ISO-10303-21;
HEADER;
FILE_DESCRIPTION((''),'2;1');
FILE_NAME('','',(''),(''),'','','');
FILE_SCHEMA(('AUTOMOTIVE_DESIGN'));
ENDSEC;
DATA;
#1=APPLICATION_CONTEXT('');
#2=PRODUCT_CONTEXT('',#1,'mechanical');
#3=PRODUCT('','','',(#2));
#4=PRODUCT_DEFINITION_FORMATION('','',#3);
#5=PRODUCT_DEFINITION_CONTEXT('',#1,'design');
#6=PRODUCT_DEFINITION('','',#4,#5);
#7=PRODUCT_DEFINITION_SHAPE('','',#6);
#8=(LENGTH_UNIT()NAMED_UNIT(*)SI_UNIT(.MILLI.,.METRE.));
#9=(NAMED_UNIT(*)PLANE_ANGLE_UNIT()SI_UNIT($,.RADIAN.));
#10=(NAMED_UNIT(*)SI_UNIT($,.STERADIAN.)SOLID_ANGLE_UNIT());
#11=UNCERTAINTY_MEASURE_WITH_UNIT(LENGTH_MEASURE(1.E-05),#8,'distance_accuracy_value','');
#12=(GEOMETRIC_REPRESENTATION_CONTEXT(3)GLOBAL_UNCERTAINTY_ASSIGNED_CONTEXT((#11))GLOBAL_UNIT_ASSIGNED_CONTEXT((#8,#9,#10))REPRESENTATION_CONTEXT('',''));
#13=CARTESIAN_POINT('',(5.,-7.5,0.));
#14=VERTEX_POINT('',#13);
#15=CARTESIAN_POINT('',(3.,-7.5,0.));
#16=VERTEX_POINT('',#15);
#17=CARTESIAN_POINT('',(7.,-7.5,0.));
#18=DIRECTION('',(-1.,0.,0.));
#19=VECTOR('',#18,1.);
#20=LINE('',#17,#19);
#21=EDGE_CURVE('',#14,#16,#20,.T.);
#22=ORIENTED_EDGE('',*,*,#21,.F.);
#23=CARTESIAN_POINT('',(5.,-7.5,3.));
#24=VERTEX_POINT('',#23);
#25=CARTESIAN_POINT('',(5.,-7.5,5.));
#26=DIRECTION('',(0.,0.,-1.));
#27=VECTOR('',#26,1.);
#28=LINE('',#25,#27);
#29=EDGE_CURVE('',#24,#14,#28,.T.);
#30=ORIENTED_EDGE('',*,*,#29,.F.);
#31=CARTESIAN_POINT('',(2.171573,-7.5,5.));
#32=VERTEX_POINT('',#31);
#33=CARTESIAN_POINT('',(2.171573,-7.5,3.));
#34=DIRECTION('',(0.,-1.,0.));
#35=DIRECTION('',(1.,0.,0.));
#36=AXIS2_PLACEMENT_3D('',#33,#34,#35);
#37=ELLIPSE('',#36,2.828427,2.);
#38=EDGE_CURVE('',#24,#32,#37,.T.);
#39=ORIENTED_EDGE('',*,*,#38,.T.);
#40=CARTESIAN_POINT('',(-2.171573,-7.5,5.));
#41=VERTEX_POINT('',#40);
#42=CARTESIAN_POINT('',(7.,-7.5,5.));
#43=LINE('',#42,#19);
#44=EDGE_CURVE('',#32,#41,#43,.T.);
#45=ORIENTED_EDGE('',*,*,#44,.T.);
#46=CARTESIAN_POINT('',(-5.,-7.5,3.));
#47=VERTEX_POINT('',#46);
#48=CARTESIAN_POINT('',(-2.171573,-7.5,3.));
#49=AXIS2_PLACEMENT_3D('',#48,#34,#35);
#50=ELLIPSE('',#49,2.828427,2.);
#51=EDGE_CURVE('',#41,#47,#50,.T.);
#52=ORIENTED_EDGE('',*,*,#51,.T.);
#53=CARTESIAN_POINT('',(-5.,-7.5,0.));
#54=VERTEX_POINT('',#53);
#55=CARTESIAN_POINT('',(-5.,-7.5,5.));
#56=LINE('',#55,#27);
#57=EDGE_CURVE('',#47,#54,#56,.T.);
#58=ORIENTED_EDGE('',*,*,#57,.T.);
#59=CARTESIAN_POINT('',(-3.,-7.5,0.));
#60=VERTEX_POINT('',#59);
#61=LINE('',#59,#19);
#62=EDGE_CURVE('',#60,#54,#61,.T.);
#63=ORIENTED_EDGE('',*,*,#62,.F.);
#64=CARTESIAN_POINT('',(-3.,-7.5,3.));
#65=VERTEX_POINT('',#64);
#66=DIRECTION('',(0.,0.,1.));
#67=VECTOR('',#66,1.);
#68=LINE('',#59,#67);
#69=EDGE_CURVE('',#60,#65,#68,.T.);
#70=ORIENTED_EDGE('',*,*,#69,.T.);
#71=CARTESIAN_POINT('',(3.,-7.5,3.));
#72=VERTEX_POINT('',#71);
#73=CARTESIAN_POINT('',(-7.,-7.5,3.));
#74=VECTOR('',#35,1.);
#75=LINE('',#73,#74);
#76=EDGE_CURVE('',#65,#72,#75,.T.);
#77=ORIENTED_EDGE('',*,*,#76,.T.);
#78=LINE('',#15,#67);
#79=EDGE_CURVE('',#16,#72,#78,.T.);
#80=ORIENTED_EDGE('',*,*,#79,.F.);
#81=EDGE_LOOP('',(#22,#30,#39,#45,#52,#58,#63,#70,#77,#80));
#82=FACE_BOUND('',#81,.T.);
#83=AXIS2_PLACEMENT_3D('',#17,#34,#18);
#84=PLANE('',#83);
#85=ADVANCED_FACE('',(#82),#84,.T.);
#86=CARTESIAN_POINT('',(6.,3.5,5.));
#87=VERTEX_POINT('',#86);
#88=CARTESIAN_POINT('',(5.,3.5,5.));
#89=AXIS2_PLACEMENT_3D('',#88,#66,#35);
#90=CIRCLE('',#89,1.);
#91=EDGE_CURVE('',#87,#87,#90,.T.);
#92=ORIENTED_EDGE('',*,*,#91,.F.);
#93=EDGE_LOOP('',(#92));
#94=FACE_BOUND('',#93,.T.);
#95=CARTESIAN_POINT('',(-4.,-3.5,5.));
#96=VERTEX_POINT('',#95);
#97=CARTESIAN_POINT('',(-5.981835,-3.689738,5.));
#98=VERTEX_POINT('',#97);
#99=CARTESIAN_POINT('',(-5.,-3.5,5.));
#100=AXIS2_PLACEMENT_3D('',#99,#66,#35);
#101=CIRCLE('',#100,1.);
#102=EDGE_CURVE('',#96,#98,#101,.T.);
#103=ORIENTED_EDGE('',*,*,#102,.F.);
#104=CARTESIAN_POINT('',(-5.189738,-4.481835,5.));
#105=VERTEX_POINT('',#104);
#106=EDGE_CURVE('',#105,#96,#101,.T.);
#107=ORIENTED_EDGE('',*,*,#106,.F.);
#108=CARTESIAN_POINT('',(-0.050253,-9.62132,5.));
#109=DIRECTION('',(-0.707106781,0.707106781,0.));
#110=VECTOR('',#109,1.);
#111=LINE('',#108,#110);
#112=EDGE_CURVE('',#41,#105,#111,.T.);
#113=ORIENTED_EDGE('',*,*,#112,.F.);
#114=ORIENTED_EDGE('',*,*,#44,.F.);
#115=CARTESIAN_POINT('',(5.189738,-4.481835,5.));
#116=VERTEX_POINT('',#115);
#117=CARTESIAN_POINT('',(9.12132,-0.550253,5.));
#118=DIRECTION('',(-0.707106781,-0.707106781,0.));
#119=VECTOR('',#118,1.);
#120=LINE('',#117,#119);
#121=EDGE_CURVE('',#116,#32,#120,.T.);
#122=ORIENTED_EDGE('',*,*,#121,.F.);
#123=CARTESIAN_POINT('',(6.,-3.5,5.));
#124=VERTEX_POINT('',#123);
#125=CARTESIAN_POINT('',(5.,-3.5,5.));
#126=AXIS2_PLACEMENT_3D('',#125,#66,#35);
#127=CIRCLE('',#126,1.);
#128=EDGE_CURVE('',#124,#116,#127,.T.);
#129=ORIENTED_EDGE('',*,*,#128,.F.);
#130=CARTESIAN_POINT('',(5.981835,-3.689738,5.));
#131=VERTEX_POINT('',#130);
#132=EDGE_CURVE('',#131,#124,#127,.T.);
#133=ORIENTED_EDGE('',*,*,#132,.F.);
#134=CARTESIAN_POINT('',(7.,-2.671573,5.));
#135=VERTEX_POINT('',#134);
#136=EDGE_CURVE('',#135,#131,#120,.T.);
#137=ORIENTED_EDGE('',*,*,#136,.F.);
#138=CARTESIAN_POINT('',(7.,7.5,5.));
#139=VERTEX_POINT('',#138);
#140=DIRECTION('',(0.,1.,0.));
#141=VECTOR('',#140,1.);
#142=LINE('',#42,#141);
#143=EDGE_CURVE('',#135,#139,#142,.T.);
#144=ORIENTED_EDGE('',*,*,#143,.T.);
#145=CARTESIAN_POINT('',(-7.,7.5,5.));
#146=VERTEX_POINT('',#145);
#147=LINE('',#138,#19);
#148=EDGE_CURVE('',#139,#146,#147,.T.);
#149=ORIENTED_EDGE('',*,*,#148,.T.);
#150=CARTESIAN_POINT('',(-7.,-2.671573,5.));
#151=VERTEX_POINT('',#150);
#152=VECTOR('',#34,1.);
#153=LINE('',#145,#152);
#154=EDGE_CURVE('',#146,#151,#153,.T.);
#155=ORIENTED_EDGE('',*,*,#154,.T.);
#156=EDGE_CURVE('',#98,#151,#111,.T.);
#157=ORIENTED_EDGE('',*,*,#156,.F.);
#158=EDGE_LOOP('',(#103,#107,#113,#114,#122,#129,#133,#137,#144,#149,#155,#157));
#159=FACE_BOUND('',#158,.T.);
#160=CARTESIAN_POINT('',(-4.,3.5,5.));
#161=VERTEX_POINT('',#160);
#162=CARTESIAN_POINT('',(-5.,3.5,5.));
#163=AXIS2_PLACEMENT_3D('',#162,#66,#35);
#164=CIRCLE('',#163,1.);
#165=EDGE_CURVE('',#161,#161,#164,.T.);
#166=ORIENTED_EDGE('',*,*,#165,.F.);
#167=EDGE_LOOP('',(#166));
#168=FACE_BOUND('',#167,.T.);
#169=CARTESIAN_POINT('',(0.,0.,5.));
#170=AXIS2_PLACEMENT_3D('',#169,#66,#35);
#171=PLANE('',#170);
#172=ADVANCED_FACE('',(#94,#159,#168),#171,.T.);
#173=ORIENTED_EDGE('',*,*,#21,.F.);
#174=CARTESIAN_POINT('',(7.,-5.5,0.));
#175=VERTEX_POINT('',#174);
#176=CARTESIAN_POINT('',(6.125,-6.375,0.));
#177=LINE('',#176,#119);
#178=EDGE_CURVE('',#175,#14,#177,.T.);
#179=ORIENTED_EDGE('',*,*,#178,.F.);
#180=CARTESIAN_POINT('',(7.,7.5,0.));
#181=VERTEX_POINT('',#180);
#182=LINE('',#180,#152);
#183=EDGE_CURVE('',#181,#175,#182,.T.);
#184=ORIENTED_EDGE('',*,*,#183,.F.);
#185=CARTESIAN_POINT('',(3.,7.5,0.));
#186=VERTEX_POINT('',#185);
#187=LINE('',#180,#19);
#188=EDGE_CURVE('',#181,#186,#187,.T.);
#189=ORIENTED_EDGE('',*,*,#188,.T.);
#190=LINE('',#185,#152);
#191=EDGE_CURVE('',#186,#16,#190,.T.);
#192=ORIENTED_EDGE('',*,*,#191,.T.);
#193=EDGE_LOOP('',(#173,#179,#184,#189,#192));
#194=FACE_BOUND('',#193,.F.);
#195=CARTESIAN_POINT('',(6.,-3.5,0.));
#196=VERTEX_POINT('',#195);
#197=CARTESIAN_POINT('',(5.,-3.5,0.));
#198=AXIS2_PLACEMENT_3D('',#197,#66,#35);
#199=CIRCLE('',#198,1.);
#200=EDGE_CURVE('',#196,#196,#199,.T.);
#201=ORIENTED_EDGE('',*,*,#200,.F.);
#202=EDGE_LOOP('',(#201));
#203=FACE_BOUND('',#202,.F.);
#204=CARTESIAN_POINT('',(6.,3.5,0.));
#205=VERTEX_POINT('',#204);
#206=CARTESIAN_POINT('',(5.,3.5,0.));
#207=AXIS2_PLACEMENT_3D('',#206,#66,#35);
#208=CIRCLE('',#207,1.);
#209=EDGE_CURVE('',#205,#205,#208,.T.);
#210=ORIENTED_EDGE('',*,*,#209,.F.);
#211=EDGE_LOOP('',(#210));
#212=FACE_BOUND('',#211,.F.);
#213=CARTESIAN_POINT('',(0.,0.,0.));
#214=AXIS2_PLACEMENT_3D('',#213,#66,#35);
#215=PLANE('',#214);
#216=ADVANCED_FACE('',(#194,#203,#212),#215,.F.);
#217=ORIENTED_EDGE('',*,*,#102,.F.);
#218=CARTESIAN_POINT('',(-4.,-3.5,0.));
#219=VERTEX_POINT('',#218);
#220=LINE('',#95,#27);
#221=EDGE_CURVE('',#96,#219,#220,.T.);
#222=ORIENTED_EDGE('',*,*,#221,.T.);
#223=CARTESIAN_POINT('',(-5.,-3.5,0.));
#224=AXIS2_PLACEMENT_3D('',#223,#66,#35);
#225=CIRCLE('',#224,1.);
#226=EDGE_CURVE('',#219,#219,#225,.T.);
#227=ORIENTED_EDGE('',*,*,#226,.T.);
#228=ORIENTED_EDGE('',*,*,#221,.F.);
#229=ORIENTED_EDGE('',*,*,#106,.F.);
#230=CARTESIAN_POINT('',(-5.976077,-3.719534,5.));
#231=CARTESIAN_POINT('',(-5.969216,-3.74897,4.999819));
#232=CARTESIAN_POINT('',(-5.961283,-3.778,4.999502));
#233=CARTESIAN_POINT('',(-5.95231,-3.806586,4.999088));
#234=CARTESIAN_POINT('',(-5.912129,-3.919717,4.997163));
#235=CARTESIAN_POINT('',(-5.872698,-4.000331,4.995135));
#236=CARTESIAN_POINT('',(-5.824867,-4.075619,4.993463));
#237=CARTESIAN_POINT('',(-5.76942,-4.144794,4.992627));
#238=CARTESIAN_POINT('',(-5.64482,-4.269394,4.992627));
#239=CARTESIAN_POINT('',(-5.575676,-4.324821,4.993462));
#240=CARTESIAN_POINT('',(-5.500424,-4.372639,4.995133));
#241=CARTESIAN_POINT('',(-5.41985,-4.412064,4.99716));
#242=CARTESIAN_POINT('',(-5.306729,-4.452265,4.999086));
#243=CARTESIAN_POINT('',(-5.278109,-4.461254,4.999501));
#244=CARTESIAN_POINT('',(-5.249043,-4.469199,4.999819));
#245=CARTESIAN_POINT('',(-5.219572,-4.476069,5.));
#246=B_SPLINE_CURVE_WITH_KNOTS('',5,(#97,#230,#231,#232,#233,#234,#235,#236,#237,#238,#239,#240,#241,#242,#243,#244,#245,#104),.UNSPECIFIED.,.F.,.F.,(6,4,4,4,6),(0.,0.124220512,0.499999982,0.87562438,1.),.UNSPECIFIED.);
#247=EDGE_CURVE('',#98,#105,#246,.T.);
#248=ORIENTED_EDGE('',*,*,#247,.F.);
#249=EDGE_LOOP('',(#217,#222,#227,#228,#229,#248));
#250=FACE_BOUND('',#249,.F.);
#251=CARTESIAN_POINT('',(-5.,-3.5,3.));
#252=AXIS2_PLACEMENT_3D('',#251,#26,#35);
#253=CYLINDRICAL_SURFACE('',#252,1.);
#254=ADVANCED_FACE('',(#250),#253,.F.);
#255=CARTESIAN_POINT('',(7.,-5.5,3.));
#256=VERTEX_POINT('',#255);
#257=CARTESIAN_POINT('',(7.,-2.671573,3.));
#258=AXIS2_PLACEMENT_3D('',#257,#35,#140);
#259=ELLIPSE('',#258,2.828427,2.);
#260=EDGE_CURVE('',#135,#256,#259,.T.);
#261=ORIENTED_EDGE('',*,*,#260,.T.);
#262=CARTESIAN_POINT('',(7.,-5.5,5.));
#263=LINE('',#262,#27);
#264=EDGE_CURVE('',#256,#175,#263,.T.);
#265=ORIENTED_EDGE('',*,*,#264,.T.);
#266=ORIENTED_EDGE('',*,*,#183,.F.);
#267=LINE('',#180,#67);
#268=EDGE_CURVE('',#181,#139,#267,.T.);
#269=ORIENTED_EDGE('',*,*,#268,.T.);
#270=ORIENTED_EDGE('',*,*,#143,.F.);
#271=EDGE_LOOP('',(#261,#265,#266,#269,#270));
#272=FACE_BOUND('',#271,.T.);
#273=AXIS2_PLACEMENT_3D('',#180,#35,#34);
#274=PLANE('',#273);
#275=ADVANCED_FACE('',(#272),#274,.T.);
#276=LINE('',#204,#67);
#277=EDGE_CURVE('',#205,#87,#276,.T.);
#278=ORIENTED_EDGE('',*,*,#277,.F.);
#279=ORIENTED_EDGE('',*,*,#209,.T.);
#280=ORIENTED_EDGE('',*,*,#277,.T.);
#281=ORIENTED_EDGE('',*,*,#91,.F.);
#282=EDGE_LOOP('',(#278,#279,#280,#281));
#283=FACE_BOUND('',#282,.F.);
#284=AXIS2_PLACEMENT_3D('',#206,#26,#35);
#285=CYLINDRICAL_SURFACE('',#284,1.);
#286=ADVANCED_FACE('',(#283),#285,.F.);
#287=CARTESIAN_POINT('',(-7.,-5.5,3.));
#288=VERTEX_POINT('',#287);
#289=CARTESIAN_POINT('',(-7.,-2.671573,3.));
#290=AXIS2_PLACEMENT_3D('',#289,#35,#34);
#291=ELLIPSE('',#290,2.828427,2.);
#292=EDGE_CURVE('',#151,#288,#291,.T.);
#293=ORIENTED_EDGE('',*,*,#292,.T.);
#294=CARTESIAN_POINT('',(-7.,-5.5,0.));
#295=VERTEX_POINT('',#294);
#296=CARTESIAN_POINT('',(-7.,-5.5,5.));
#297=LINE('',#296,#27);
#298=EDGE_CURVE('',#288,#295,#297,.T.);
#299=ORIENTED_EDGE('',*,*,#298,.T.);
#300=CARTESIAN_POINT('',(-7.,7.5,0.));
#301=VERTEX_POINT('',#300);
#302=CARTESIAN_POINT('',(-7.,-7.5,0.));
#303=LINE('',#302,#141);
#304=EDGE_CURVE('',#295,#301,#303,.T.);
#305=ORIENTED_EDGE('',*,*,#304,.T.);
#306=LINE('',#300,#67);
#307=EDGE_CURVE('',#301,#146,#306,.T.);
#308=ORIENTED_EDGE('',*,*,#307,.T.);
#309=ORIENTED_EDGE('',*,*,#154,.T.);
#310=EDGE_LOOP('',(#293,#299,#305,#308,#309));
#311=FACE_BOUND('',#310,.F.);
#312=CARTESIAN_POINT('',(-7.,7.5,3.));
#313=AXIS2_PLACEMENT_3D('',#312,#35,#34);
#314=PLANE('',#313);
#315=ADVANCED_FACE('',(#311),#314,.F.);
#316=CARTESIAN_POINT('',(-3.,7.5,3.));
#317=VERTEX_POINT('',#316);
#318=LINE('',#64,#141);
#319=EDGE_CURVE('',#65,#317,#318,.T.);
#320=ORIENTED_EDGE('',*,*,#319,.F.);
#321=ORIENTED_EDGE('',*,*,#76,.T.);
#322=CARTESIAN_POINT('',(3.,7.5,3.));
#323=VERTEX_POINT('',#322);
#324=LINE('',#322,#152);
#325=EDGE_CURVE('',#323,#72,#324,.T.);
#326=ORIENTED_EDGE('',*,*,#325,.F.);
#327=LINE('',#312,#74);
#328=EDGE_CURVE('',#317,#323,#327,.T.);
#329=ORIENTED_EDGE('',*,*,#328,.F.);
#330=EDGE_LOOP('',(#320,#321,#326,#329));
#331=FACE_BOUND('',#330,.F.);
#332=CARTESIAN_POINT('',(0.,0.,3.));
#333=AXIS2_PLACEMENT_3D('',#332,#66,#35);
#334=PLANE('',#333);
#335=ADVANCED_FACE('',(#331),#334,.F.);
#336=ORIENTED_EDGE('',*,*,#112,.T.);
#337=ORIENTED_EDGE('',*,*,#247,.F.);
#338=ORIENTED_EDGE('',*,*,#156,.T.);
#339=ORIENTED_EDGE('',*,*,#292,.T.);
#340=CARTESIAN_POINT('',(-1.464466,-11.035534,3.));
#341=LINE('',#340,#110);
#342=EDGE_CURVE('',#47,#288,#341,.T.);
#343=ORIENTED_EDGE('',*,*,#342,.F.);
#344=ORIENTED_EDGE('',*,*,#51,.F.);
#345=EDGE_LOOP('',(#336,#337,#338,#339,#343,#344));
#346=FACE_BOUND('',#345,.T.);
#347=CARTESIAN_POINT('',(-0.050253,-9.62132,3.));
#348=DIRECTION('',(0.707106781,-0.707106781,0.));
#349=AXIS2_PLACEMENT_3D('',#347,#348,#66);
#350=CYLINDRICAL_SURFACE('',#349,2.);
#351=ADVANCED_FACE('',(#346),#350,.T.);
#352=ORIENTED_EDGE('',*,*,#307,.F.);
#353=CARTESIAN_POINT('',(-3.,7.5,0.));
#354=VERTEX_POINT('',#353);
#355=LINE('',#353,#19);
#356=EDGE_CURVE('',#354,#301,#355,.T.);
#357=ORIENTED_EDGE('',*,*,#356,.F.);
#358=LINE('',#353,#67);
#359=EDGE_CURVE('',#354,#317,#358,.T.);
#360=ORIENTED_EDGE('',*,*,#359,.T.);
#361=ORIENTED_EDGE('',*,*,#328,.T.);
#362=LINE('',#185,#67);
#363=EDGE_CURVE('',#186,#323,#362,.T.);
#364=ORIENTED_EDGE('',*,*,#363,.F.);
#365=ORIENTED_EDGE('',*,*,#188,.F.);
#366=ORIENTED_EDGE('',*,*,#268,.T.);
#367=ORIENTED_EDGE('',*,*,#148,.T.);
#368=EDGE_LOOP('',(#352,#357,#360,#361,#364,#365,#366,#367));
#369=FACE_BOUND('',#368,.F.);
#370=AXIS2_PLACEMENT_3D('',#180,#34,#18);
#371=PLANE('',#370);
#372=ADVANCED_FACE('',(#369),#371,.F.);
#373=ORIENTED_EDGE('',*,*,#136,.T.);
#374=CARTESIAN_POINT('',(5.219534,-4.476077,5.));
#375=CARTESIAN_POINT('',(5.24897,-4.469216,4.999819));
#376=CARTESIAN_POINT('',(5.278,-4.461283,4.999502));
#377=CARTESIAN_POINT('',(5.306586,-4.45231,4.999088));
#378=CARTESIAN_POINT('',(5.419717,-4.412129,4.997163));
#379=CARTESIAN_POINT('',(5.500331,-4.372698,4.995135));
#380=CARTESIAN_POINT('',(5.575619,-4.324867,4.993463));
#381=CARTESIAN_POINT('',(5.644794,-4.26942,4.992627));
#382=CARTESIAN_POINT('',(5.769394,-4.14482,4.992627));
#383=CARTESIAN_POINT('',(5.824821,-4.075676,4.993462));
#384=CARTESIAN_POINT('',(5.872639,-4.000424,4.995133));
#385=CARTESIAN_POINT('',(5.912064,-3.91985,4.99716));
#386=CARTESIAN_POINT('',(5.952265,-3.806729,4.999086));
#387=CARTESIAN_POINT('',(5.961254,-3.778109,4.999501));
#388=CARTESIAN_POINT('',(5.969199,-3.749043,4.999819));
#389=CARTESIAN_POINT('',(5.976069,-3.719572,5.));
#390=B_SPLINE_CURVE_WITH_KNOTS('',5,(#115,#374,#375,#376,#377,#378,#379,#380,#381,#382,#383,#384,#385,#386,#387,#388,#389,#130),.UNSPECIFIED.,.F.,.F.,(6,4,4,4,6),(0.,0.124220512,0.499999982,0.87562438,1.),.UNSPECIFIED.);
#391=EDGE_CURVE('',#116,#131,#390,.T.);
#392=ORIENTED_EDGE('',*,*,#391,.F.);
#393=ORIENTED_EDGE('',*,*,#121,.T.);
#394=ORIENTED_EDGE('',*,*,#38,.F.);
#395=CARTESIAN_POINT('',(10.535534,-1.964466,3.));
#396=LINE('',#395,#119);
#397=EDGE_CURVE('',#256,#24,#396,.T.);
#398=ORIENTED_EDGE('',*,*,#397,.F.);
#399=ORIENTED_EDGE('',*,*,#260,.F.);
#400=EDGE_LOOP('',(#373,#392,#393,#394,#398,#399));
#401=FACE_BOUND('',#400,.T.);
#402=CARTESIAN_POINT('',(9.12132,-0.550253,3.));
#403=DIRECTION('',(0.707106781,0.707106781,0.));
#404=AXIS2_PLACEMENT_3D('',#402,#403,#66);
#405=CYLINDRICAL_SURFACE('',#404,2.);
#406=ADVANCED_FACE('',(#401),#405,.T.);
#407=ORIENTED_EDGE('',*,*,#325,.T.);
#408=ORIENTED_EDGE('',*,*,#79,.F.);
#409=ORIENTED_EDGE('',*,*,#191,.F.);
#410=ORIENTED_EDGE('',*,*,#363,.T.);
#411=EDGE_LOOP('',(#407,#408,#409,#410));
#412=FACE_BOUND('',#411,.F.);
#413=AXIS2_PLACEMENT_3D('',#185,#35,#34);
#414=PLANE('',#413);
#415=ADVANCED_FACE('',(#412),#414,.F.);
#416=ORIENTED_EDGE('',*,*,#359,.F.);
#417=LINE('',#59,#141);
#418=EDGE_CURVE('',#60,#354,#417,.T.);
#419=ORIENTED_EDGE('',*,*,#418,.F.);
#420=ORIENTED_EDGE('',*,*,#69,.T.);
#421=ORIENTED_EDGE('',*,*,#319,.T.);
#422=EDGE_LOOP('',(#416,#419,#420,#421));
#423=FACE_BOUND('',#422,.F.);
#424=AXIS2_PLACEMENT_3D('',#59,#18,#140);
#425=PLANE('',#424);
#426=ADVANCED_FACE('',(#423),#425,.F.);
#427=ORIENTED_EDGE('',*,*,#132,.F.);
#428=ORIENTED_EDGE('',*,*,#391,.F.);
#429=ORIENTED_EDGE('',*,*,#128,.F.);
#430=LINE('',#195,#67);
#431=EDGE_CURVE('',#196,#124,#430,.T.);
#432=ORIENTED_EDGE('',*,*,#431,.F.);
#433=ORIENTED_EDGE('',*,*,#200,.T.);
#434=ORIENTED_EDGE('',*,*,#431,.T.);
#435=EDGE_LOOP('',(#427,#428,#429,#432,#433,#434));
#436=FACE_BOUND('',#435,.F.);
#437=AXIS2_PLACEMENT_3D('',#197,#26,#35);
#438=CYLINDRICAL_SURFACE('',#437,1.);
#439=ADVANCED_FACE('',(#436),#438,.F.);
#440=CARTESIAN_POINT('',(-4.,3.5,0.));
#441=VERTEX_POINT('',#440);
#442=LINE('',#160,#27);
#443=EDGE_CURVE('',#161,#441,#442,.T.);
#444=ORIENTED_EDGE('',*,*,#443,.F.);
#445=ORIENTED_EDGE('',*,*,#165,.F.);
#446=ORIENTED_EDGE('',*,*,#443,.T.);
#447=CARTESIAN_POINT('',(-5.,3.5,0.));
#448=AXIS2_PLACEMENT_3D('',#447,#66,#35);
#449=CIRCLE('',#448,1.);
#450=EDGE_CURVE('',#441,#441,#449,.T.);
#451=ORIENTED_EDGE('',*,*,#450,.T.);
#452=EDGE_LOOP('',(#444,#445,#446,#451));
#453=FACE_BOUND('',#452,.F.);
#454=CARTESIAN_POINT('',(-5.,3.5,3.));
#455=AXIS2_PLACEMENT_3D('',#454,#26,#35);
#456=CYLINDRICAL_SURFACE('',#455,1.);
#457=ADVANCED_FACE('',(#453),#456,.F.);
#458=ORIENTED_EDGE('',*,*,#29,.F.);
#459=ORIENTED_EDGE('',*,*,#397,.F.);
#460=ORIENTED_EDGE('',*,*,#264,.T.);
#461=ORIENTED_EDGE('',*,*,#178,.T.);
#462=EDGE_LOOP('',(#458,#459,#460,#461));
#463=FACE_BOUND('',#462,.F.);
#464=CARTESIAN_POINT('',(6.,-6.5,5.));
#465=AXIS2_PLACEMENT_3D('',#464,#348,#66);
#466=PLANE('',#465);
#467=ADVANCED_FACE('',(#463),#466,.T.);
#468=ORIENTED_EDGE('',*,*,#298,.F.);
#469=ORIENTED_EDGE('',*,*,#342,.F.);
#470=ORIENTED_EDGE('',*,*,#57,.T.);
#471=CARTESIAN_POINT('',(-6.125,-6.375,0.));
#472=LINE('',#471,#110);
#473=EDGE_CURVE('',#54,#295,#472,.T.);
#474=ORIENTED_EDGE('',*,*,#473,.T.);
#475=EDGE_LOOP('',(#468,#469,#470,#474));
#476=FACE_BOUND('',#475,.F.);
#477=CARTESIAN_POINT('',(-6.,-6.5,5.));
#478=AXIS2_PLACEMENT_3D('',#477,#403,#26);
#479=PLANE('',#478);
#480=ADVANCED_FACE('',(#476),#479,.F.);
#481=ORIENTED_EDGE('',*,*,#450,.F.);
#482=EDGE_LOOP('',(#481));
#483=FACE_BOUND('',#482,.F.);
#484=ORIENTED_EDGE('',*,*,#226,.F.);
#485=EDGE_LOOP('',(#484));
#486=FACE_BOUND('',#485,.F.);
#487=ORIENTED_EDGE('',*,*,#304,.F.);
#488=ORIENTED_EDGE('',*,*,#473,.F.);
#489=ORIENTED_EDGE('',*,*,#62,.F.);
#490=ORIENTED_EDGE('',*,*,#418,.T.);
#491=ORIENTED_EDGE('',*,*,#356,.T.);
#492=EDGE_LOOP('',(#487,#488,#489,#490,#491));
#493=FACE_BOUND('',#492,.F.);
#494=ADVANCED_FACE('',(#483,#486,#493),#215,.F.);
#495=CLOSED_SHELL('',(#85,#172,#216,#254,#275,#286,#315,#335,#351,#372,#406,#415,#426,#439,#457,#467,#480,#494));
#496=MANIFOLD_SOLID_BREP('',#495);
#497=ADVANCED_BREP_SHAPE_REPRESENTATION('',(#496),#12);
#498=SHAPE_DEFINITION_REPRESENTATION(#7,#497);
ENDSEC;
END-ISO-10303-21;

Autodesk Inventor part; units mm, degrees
ref_plane "YZ Plane" through (0, 0, 0) normal (1, 0, 0) x (0, 1, 0)
ref_plane "XZ Plane" through (0, 0, 0) normal (0, 1, 0) x (-1, 0, 0)
ref_plane "XY Plane" through (0, 0, 0) normal (0, 0, 1) x (1, 0, 0)
sketch "Sketch1" plane through (0, 0, 0) normal (0, 0, 1) x (1, 0, 0)
  line L0 (7, 7.5) -> (3, 7.5) projected
  line L1 (3, 7.5) -> (3, -7.5) projected
  line L2 (7, -7.5) -> (3, -7.5) projected
  line L3 (7, 7.5) -> (7, -7.5) projected
  circle A0 centre (5, -3.5) radius 1 projected
  circle A1 centre (5, 3.5) radius 1 projected
  line L4 (-3, 7.5) -> (-7, 7.5) projected
  line L5 (-7, -7.5) -> (-7, 7.5) projected
  line L6 (-3, -7.5) -> (-7, -7.5) projected
  line L7 (-3, -7.5) -> (-3, 7.5) projected
  circle A2 centre (-5, 3.5) radius 1 projected
  circle A3 centre (-5, -3.5) radius 1 projected
  point P0 (0, 0)
extrude "Extrusion1" add sketch "Sketch1" along normal blind 3
sketch "Sketch2" plane through (0, 0, 3) normal (0, 0, 1) x (1, 0, 0)
  line L0 (7, -7.5) -> (7, 7.5) projected
  line L1 (7, 7.5) -> (3, 7.5) projected
  line L2 (3, 7.5) -> (3, -7.5) projected
  line L3 (3, -7.5) -> (7, -7.5) projected
  circle A0 centre (5, -3.5) radius 1 projected
  circle A1 centre (5, 3.5) radius 1 projected
  line L4 (-3, -7.5) -> (-3, 7.5) projected
  line L5 (-3, 7.5) -> (-7, 7.5) projected
  line L6 (-7, 7.5) -> (-7, -7.5) projected
  line L7 (-7, -7.5) -> (-3, -7.5) projected
  circle A2 centre (-5, 3.5) radius 1 projected
  circle A3 centre (-5, -3.5) radius 1 projected
  line L8 (7, -7.5) -> (-7, -7.5)
  line L9 (-7, -7.5) -> (-7, 7.5)
  line L10 (-7, 7.5) -> (7, 7.5)
  line L11 (7, 7.5) -> (7, -7.5)
  point P0 (0, 0)
extrude "Extrusion2" add sketch "Sketch2" along normal blind 2
chamfer "Chamfer1" distance 2 angle 45 2 edges at (7, -7.5, 2.5) (-7, -7.5, 2.5)
fillet "Fillet1" radius 2 2 edges at (6, -6.5, 5) (-6, -6.5, 5)
properties part number "sub_arm_2"
